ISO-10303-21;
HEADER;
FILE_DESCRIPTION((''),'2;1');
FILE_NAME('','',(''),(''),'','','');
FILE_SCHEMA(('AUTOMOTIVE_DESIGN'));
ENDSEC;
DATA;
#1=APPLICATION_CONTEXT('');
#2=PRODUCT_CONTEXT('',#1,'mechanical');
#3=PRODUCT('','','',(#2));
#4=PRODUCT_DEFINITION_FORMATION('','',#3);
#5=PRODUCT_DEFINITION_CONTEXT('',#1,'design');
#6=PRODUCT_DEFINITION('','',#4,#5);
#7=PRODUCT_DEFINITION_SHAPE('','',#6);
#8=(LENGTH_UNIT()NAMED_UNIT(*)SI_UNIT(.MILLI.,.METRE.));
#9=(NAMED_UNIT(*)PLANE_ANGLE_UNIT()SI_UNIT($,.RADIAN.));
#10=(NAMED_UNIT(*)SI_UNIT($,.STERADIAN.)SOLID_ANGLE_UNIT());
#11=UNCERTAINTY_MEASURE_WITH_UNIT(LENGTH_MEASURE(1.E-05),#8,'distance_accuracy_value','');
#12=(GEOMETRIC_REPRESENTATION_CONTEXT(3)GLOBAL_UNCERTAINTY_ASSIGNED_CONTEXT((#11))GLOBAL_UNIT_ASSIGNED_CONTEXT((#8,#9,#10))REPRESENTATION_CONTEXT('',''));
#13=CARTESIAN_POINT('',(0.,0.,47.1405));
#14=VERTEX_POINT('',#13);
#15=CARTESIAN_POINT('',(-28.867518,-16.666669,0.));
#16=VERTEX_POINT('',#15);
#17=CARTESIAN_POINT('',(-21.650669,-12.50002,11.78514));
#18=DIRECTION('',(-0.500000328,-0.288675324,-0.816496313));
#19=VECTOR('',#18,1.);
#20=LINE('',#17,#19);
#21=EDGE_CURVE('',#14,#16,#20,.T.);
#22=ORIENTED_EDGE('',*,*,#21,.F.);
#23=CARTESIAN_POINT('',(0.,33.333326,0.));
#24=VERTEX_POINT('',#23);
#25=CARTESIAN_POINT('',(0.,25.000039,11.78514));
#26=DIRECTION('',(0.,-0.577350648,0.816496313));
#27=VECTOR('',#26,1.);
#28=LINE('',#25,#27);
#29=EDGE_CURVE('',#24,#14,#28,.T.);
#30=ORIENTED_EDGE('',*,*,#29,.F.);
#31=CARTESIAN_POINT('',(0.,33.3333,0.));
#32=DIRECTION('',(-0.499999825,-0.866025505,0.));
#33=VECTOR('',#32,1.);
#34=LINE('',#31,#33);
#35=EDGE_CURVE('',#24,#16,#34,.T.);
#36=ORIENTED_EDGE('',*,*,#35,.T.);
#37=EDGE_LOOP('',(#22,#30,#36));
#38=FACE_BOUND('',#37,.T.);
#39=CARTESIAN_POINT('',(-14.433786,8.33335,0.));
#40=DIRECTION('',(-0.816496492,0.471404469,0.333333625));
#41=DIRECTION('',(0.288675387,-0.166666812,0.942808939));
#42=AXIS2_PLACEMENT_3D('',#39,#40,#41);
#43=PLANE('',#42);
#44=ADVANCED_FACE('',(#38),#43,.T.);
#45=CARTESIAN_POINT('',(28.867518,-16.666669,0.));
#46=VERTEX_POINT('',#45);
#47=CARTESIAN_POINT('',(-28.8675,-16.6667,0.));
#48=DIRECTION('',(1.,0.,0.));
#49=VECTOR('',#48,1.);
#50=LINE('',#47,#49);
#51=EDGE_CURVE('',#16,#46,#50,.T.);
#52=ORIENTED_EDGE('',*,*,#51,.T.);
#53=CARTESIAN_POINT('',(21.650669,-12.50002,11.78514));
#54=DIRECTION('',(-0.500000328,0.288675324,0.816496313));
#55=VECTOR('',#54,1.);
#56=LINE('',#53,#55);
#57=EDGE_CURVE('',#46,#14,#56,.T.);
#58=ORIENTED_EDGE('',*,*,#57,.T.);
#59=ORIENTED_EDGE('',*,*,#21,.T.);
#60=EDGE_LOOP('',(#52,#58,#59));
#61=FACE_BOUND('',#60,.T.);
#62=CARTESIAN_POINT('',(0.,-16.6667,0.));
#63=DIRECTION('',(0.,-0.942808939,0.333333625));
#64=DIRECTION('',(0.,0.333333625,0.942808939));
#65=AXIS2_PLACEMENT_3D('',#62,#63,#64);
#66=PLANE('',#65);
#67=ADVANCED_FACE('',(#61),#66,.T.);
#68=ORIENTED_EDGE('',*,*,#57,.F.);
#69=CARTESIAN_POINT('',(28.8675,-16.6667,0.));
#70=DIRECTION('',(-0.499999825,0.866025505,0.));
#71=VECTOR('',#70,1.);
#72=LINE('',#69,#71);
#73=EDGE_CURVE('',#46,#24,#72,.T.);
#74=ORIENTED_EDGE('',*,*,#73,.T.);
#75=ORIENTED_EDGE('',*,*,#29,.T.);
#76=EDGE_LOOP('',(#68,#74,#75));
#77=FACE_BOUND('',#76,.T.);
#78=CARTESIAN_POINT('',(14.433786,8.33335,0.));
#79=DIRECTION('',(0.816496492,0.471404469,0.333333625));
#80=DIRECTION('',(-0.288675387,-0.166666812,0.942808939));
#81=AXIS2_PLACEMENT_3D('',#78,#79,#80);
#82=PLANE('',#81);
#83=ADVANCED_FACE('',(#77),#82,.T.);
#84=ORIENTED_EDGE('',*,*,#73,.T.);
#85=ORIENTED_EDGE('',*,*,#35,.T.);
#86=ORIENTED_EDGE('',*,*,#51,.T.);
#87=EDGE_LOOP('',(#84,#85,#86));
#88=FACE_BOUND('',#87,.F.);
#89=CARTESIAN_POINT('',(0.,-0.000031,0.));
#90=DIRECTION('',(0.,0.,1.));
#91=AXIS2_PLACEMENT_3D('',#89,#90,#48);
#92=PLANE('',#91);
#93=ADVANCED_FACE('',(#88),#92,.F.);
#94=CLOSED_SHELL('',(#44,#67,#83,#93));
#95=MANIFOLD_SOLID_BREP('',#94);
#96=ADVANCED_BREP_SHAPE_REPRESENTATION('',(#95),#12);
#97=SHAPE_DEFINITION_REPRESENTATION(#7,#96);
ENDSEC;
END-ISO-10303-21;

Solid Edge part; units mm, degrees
sketch "Sketch1" plane through (0, 0, 0) normal (0, 0, 1) x (1, 0, 0)
  line L0 (-28.8675, -16.6667) -> (28.8675, -16.6667)
  line L1 (28.8675, -16.6667) -> (0, 33.3333)
  line L2 (0, 33.3333) -> (-28.8675, -16.6667)
extrude "Protrusion1" add sketch "Sketch1" along normal blind 74.181
sketch "Sketch2" plane through (0, 0, 0) normal (1, 0, 0) x (0, 1, 0)
  line L0 (-16.6667, 0) -> (0, 47.1405)
extrude "Cutout1" cut sketch "Sketch2" along normal up to next and the other way up to next material side at (0, -8.3805, 23.5869)
pattern_circular "Pattern1" count 3 over 360 about axis through (0, 0, 0) along (0, 0, 1) of "Cutout1"
